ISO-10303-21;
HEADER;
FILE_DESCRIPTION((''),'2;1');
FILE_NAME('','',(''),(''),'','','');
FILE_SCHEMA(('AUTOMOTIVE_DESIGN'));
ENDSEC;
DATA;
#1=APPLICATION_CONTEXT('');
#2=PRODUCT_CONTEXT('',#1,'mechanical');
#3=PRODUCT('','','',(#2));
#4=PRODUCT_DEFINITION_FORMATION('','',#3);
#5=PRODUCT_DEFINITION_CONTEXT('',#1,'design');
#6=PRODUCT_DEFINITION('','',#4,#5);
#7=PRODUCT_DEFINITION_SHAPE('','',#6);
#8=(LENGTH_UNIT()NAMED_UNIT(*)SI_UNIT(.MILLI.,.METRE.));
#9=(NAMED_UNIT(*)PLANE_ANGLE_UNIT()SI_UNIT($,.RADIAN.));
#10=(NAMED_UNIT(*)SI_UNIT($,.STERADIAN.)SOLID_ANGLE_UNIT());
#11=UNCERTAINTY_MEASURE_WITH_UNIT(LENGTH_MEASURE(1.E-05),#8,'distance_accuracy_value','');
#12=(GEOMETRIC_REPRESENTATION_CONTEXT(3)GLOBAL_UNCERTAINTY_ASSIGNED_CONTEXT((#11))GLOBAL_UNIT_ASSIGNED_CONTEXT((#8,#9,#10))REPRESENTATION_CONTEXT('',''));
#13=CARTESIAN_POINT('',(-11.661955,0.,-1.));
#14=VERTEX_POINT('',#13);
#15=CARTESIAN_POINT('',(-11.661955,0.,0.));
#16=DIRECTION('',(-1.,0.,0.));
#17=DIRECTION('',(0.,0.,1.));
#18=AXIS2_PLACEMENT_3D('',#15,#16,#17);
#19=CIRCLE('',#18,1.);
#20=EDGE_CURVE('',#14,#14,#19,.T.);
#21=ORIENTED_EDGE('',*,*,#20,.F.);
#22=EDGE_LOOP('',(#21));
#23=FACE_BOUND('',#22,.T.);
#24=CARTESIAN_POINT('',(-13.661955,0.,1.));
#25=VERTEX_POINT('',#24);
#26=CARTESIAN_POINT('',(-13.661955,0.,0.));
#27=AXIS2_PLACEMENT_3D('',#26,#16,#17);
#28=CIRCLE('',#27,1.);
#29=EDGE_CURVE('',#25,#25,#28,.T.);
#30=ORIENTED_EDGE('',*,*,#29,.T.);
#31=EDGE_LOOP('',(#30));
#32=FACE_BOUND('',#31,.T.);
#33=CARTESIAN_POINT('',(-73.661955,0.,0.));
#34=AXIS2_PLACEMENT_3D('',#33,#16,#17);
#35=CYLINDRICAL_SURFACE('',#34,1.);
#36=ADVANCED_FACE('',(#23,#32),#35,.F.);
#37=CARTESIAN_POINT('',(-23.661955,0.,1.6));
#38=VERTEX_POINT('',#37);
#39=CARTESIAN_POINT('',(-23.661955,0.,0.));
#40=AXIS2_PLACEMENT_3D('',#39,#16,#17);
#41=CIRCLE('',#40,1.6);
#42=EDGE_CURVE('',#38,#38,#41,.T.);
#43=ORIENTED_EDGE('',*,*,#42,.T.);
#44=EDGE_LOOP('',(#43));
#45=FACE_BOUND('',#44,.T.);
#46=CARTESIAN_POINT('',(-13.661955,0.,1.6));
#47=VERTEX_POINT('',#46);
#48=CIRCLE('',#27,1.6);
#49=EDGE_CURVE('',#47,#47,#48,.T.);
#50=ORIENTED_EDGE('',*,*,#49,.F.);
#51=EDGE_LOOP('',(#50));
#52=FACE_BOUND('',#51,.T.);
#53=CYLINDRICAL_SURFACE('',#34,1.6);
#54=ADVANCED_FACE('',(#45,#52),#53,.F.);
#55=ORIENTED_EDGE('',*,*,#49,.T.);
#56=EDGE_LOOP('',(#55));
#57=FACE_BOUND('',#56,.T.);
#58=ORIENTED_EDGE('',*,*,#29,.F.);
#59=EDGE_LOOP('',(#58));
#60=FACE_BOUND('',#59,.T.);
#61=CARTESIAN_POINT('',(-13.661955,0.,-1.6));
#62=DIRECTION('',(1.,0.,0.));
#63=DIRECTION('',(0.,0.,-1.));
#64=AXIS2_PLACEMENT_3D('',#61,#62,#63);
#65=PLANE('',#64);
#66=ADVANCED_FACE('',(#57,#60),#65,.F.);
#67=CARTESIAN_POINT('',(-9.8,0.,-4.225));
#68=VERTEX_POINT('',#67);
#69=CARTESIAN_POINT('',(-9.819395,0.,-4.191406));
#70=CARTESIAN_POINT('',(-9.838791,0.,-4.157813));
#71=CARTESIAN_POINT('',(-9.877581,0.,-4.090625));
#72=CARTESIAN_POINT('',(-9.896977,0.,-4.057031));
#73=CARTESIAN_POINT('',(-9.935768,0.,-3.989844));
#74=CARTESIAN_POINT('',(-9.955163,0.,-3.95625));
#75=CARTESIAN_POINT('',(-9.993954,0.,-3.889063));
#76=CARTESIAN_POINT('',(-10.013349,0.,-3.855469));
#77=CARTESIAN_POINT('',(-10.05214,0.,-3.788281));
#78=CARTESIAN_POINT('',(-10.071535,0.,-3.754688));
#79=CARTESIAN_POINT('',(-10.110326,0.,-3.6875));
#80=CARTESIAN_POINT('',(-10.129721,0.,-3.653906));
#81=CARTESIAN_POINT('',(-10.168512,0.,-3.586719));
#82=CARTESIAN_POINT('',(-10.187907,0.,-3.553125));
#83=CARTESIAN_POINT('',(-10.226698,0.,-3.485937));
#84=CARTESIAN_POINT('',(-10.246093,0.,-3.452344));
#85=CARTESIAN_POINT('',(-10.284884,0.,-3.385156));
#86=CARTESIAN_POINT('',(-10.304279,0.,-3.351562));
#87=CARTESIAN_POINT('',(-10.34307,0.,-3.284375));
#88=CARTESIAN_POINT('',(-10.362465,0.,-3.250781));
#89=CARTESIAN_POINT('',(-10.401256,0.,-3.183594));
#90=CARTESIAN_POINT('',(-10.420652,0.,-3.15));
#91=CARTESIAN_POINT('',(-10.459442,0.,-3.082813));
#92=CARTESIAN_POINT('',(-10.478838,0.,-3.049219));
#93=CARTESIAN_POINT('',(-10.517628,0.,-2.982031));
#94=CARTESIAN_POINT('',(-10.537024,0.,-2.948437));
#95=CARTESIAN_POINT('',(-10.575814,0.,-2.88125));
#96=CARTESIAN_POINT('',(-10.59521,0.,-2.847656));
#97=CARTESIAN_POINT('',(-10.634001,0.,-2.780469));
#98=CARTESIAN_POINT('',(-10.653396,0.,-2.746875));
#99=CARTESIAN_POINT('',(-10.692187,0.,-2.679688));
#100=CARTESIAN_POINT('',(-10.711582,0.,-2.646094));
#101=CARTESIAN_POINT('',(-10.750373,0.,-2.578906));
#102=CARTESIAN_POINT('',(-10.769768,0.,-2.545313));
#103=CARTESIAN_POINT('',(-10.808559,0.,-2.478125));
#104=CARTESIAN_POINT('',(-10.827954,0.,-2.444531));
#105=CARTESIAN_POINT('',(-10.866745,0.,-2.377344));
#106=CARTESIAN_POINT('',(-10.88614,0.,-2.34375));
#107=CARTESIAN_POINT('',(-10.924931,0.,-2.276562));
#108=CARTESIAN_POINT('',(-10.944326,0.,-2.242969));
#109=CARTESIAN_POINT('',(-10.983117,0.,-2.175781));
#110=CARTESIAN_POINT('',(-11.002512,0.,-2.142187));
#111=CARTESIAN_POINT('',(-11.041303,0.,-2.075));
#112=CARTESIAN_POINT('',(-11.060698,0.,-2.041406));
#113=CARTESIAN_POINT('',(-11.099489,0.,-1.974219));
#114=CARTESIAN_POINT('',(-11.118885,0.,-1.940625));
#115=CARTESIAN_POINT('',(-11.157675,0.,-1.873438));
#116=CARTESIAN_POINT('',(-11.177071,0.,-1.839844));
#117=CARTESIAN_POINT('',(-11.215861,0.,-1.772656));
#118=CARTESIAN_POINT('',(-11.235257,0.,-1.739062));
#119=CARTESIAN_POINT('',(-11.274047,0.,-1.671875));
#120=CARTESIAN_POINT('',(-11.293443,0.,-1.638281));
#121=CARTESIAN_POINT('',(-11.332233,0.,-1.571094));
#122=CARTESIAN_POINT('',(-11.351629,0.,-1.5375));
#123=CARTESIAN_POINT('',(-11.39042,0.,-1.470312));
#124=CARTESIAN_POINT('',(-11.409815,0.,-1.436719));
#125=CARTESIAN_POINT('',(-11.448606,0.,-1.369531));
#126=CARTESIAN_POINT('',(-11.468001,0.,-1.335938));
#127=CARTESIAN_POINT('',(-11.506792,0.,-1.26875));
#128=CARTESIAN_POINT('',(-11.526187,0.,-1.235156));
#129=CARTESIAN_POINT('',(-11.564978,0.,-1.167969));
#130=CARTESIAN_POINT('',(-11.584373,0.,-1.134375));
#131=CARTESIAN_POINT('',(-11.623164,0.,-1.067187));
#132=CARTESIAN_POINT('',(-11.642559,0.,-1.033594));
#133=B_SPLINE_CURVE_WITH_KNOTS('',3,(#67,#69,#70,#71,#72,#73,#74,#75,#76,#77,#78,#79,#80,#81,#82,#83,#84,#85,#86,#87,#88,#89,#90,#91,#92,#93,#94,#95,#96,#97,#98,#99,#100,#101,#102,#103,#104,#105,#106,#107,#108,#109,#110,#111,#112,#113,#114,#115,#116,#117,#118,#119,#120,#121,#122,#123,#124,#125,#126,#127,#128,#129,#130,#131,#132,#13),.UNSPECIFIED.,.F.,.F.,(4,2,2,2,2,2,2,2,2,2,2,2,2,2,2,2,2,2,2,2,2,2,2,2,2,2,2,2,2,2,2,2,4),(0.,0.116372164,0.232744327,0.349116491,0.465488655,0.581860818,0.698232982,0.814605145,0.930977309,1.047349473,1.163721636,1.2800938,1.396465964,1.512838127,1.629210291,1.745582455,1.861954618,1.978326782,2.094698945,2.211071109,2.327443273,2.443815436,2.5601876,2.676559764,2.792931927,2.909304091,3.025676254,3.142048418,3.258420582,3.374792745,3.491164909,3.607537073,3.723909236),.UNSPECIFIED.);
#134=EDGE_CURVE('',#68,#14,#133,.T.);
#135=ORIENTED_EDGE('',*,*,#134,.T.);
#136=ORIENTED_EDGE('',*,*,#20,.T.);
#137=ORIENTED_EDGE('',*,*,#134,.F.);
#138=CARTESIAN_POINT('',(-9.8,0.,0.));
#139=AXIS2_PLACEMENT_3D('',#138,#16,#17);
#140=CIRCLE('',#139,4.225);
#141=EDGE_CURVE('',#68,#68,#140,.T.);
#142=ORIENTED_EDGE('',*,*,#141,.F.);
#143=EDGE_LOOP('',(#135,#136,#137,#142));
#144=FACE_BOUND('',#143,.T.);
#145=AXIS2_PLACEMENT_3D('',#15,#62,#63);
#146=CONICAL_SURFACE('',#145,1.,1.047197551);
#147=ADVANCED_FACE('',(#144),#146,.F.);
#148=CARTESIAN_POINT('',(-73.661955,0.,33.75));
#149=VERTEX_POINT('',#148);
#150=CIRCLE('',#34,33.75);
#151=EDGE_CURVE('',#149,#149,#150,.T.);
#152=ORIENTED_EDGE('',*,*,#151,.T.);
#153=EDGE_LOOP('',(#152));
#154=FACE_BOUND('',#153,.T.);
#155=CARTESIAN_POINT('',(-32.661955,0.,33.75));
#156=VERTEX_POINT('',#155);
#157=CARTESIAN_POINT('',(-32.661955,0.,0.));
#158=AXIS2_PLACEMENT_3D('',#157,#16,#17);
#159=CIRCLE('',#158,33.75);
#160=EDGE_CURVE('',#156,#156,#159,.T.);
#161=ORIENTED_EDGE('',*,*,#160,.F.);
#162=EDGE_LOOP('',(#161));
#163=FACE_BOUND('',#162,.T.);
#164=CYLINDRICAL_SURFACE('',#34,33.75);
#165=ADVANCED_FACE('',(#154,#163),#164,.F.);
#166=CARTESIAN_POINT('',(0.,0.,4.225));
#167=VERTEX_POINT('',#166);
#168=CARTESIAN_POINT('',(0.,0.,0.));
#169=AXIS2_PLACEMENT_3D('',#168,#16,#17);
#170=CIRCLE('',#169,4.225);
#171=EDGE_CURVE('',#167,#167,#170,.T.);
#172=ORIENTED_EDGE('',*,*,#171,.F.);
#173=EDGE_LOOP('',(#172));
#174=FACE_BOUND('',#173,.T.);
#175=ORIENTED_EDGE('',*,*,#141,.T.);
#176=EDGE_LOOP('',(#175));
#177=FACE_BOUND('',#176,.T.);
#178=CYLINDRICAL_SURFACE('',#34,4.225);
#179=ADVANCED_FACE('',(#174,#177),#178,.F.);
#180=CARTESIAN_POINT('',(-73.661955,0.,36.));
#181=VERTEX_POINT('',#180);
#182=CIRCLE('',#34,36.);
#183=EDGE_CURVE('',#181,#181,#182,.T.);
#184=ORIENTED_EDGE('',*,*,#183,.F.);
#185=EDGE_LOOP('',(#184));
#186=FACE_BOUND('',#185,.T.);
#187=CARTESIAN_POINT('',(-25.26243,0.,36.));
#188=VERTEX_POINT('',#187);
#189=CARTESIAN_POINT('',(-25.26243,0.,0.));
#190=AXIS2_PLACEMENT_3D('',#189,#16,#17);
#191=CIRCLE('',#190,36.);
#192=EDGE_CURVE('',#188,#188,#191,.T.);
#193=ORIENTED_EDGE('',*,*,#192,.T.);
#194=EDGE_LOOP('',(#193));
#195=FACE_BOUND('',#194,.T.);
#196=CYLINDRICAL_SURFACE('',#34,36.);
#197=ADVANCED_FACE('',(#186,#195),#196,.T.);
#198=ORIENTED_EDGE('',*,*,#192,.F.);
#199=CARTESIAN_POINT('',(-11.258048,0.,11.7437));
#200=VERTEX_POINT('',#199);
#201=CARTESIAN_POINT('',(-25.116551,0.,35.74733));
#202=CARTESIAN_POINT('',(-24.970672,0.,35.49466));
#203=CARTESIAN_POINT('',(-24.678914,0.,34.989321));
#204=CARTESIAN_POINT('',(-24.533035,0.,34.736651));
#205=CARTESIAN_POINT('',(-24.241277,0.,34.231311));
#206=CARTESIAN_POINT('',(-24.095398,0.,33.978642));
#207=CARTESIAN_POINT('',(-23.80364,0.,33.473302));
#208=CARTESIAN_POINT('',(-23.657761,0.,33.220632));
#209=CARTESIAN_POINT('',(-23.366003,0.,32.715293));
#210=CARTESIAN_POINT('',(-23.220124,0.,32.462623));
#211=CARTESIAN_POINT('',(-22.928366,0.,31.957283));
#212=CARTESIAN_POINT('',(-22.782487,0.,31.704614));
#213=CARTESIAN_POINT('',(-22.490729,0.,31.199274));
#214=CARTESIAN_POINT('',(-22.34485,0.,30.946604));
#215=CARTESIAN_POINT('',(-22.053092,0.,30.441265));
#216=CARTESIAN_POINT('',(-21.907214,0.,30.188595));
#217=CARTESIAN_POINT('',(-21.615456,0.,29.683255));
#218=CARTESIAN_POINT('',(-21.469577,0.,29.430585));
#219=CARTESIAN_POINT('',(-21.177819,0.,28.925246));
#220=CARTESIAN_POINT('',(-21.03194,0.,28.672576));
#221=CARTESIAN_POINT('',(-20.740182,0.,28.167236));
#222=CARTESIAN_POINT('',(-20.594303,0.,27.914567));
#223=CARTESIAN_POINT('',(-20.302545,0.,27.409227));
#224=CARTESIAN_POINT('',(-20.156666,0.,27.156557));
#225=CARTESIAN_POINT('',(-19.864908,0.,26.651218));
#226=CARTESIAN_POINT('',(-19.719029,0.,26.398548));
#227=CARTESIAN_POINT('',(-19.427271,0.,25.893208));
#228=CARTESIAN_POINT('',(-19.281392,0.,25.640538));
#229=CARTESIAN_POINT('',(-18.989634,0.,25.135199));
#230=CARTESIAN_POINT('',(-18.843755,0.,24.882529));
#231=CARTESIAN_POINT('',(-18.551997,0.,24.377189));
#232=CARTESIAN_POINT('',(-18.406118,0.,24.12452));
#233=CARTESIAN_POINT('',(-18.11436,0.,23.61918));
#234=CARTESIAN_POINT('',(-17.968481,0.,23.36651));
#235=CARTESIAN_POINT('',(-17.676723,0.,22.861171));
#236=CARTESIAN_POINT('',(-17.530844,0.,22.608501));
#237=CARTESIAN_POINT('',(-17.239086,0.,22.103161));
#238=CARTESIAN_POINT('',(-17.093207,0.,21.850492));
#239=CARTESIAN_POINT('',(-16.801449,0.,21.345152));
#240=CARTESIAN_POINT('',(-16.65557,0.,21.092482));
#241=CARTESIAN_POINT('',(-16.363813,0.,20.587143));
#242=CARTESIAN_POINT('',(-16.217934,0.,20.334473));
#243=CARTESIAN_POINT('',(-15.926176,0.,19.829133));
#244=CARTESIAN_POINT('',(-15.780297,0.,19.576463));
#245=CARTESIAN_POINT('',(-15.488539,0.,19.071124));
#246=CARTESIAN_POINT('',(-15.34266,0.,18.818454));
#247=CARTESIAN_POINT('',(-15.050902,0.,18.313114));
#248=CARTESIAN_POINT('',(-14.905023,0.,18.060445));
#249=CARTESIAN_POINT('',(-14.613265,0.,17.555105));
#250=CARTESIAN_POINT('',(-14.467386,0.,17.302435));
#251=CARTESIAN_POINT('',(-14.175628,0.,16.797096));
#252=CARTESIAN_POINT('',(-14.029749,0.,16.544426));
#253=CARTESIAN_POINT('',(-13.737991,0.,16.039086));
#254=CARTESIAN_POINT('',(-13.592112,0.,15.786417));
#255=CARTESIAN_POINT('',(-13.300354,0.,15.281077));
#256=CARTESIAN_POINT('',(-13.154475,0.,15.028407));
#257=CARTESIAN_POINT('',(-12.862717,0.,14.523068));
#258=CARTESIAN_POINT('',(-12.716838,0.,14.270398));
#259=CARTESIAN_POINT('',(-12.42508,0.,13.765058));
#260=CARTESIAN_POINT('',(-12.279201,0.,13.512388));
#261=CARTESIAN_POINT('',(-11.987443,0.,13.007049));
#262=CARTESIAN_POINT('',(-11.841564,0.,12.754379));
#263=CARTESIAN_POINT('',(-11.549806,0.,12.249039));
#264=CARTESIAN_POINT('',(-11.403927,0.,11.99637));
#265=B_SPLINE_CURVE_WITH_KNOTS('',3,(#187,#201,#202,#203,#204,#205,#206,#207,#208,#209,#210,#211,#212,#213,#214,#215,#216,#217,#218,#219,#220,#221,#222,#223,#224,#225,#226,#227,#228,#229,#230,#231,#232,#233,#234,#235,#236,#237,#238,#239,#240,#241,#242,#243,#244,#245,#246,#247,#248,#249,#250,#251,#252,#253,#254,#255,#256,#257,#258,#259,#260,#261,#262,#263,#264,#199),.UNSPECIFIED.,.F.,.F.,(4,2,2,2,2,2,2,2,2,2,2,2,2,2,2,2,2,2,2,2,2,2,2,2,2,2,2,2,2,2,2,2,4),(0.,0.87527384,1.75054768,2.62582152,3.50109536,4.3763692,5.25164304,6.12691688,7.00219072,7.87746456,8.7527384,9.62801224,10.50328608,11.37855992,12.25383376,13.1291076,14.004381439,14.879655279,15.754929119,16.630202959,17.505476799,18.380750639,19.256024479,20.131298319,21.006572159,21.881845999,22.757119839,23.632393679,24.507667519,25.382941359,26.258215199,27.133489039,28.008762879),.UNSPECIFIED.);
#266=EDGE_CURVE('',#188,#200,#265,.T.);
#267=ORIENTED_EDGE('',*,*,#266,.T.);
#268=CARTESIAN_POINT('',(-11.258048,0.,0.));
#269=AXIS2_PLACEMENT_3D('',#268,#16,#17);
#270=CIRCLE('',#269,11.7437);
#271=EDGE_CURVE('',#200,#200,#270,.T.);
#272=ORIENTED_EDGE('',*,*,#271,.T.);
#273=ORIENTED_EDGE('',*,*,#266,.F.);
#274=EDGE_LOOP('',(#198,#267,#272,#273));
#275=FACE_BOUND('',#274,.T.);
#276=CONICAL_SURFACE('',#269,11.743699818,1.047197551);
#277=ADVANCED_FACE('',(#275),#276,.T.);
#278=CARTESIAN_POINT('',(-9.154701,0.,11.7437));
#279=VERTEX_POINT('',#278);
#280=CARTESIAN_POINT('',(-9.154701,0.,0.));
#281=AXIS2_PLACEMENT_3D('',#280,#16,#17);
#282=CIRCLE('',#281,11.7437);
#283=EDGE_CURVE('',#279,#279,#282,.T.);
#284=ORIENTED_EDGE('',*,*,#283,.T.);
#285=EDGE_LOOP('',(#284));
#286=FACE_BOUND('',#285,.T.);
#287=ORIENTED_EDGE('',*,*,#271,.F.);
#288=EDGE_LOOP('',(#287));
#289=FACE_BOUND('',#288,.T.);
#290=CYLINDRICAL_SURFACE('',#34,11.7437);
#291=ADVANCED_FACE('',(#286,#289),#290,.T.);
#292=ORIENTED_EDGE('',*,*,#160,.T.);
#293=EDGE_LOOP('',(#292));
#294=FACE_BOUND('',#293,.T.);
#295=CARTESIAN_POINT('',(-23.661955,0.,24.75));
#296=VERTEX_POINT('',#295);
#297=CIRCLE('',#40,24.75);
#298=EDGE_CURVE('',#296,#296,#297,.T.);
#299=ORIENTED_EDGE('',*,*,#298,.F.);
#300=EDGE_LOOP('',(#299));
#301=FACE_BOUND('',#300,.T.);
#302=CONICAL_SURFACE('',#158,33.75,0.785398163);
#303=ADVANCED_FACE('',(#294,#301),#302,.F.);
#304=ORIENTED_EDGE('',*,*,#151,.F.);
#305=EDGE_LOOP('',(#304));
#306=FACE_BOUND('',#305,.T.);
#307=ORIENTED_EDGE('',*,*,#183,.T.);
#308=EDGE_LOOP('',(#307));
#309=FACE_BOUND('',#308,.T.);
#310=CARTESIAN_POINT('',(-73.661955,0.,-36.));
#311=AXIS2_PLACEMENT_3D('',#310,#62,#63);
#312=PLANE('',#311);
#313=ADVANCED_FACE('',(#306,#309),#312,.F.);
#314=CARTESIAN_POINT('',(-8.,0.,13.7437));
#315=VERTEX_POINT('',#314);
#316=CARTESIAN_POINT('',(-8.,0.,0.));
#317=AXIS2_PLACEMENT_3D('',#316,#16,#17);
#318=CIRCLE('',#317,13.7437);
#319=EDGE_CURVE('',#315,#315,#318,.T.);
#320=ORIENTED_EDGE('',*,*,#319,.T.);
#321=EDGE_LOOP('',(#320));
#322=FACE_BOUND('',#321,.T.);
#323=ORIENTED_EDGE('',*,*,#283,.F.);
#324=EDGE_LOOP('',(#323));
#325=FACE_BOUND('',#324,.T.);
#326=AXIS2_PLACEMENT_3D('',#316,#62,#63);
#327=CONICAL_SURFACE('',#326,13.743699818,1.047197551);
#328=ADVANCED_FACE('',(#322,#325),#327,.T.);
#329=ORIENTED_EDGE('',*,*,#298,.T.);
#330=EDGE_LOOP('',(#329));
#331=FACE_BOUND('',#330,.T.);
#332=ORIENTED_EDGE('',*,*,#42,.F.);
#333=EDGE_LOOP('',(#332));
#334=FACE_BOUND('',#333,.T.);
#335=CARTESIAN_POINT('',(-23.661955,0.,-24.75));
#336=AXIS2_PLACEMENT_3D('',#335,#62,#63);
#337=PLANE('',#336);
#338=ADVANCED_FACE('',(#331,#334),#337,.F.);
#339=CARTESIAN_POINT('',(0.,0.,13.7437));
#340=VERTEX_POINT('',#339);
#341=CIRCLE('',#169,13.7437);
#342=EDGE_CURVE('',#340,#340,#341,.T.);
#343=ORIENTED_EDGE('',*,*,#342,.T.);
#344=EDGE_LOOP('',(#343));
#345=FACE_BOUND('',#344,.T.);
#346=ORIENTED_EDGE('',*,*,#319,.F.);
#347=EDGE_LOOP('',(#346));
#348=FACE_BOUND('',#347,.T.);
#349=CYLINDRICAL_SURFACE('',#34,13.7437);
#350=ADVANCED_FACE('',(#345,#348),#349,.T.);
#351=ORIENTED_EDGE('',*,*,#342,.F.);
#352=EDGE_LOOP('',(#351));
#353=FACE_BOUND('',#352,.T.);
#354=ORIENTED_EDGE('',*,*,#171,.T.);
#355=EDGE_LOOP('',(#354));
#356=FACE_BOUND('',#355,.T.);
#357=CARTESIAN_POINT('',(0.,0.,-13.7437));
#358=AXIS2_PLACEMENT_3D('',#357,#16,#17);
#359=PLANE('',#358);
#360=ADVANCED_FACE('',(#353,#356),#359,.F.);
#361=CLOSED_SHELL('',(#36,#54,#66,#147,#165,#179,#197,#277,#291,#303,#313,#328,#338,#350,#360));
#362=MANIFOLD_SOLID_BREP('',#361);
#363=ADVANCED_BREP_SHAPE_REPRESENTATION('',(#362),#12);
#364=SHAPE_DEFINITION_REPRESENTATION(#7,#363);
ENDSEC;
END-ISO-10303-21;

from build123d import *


with BuildPart() as part:
    # Sketch1 → Revolve1 (revolve)
    with BuildSketch(Plane(origin=(0, 0, 0), x_dir=(1, 0, 0), z_dir=(0, 1, 0))):
        Polygon((-73.661954618, 36), (-25.262429889, 36), (-11.25804845, 11.743699818), (-9.154700538, 11.743699818), (-8, 13.743699818), (0, 13.743699818), (0, 4.225), (-9.8, 4.225), (-11.661954618, 1), (-13.661954618, 1), (-13.661954618, 1.6), (-23.661954618, 1.6), (-23.661954618, 24.75), (-32.661954618, 33.75), (-73.661954618, 33.75), align=None)
    revolve(axis=Axis((-73.661954618, 0, 0), (1, 0, 0)))


solid = part.part
